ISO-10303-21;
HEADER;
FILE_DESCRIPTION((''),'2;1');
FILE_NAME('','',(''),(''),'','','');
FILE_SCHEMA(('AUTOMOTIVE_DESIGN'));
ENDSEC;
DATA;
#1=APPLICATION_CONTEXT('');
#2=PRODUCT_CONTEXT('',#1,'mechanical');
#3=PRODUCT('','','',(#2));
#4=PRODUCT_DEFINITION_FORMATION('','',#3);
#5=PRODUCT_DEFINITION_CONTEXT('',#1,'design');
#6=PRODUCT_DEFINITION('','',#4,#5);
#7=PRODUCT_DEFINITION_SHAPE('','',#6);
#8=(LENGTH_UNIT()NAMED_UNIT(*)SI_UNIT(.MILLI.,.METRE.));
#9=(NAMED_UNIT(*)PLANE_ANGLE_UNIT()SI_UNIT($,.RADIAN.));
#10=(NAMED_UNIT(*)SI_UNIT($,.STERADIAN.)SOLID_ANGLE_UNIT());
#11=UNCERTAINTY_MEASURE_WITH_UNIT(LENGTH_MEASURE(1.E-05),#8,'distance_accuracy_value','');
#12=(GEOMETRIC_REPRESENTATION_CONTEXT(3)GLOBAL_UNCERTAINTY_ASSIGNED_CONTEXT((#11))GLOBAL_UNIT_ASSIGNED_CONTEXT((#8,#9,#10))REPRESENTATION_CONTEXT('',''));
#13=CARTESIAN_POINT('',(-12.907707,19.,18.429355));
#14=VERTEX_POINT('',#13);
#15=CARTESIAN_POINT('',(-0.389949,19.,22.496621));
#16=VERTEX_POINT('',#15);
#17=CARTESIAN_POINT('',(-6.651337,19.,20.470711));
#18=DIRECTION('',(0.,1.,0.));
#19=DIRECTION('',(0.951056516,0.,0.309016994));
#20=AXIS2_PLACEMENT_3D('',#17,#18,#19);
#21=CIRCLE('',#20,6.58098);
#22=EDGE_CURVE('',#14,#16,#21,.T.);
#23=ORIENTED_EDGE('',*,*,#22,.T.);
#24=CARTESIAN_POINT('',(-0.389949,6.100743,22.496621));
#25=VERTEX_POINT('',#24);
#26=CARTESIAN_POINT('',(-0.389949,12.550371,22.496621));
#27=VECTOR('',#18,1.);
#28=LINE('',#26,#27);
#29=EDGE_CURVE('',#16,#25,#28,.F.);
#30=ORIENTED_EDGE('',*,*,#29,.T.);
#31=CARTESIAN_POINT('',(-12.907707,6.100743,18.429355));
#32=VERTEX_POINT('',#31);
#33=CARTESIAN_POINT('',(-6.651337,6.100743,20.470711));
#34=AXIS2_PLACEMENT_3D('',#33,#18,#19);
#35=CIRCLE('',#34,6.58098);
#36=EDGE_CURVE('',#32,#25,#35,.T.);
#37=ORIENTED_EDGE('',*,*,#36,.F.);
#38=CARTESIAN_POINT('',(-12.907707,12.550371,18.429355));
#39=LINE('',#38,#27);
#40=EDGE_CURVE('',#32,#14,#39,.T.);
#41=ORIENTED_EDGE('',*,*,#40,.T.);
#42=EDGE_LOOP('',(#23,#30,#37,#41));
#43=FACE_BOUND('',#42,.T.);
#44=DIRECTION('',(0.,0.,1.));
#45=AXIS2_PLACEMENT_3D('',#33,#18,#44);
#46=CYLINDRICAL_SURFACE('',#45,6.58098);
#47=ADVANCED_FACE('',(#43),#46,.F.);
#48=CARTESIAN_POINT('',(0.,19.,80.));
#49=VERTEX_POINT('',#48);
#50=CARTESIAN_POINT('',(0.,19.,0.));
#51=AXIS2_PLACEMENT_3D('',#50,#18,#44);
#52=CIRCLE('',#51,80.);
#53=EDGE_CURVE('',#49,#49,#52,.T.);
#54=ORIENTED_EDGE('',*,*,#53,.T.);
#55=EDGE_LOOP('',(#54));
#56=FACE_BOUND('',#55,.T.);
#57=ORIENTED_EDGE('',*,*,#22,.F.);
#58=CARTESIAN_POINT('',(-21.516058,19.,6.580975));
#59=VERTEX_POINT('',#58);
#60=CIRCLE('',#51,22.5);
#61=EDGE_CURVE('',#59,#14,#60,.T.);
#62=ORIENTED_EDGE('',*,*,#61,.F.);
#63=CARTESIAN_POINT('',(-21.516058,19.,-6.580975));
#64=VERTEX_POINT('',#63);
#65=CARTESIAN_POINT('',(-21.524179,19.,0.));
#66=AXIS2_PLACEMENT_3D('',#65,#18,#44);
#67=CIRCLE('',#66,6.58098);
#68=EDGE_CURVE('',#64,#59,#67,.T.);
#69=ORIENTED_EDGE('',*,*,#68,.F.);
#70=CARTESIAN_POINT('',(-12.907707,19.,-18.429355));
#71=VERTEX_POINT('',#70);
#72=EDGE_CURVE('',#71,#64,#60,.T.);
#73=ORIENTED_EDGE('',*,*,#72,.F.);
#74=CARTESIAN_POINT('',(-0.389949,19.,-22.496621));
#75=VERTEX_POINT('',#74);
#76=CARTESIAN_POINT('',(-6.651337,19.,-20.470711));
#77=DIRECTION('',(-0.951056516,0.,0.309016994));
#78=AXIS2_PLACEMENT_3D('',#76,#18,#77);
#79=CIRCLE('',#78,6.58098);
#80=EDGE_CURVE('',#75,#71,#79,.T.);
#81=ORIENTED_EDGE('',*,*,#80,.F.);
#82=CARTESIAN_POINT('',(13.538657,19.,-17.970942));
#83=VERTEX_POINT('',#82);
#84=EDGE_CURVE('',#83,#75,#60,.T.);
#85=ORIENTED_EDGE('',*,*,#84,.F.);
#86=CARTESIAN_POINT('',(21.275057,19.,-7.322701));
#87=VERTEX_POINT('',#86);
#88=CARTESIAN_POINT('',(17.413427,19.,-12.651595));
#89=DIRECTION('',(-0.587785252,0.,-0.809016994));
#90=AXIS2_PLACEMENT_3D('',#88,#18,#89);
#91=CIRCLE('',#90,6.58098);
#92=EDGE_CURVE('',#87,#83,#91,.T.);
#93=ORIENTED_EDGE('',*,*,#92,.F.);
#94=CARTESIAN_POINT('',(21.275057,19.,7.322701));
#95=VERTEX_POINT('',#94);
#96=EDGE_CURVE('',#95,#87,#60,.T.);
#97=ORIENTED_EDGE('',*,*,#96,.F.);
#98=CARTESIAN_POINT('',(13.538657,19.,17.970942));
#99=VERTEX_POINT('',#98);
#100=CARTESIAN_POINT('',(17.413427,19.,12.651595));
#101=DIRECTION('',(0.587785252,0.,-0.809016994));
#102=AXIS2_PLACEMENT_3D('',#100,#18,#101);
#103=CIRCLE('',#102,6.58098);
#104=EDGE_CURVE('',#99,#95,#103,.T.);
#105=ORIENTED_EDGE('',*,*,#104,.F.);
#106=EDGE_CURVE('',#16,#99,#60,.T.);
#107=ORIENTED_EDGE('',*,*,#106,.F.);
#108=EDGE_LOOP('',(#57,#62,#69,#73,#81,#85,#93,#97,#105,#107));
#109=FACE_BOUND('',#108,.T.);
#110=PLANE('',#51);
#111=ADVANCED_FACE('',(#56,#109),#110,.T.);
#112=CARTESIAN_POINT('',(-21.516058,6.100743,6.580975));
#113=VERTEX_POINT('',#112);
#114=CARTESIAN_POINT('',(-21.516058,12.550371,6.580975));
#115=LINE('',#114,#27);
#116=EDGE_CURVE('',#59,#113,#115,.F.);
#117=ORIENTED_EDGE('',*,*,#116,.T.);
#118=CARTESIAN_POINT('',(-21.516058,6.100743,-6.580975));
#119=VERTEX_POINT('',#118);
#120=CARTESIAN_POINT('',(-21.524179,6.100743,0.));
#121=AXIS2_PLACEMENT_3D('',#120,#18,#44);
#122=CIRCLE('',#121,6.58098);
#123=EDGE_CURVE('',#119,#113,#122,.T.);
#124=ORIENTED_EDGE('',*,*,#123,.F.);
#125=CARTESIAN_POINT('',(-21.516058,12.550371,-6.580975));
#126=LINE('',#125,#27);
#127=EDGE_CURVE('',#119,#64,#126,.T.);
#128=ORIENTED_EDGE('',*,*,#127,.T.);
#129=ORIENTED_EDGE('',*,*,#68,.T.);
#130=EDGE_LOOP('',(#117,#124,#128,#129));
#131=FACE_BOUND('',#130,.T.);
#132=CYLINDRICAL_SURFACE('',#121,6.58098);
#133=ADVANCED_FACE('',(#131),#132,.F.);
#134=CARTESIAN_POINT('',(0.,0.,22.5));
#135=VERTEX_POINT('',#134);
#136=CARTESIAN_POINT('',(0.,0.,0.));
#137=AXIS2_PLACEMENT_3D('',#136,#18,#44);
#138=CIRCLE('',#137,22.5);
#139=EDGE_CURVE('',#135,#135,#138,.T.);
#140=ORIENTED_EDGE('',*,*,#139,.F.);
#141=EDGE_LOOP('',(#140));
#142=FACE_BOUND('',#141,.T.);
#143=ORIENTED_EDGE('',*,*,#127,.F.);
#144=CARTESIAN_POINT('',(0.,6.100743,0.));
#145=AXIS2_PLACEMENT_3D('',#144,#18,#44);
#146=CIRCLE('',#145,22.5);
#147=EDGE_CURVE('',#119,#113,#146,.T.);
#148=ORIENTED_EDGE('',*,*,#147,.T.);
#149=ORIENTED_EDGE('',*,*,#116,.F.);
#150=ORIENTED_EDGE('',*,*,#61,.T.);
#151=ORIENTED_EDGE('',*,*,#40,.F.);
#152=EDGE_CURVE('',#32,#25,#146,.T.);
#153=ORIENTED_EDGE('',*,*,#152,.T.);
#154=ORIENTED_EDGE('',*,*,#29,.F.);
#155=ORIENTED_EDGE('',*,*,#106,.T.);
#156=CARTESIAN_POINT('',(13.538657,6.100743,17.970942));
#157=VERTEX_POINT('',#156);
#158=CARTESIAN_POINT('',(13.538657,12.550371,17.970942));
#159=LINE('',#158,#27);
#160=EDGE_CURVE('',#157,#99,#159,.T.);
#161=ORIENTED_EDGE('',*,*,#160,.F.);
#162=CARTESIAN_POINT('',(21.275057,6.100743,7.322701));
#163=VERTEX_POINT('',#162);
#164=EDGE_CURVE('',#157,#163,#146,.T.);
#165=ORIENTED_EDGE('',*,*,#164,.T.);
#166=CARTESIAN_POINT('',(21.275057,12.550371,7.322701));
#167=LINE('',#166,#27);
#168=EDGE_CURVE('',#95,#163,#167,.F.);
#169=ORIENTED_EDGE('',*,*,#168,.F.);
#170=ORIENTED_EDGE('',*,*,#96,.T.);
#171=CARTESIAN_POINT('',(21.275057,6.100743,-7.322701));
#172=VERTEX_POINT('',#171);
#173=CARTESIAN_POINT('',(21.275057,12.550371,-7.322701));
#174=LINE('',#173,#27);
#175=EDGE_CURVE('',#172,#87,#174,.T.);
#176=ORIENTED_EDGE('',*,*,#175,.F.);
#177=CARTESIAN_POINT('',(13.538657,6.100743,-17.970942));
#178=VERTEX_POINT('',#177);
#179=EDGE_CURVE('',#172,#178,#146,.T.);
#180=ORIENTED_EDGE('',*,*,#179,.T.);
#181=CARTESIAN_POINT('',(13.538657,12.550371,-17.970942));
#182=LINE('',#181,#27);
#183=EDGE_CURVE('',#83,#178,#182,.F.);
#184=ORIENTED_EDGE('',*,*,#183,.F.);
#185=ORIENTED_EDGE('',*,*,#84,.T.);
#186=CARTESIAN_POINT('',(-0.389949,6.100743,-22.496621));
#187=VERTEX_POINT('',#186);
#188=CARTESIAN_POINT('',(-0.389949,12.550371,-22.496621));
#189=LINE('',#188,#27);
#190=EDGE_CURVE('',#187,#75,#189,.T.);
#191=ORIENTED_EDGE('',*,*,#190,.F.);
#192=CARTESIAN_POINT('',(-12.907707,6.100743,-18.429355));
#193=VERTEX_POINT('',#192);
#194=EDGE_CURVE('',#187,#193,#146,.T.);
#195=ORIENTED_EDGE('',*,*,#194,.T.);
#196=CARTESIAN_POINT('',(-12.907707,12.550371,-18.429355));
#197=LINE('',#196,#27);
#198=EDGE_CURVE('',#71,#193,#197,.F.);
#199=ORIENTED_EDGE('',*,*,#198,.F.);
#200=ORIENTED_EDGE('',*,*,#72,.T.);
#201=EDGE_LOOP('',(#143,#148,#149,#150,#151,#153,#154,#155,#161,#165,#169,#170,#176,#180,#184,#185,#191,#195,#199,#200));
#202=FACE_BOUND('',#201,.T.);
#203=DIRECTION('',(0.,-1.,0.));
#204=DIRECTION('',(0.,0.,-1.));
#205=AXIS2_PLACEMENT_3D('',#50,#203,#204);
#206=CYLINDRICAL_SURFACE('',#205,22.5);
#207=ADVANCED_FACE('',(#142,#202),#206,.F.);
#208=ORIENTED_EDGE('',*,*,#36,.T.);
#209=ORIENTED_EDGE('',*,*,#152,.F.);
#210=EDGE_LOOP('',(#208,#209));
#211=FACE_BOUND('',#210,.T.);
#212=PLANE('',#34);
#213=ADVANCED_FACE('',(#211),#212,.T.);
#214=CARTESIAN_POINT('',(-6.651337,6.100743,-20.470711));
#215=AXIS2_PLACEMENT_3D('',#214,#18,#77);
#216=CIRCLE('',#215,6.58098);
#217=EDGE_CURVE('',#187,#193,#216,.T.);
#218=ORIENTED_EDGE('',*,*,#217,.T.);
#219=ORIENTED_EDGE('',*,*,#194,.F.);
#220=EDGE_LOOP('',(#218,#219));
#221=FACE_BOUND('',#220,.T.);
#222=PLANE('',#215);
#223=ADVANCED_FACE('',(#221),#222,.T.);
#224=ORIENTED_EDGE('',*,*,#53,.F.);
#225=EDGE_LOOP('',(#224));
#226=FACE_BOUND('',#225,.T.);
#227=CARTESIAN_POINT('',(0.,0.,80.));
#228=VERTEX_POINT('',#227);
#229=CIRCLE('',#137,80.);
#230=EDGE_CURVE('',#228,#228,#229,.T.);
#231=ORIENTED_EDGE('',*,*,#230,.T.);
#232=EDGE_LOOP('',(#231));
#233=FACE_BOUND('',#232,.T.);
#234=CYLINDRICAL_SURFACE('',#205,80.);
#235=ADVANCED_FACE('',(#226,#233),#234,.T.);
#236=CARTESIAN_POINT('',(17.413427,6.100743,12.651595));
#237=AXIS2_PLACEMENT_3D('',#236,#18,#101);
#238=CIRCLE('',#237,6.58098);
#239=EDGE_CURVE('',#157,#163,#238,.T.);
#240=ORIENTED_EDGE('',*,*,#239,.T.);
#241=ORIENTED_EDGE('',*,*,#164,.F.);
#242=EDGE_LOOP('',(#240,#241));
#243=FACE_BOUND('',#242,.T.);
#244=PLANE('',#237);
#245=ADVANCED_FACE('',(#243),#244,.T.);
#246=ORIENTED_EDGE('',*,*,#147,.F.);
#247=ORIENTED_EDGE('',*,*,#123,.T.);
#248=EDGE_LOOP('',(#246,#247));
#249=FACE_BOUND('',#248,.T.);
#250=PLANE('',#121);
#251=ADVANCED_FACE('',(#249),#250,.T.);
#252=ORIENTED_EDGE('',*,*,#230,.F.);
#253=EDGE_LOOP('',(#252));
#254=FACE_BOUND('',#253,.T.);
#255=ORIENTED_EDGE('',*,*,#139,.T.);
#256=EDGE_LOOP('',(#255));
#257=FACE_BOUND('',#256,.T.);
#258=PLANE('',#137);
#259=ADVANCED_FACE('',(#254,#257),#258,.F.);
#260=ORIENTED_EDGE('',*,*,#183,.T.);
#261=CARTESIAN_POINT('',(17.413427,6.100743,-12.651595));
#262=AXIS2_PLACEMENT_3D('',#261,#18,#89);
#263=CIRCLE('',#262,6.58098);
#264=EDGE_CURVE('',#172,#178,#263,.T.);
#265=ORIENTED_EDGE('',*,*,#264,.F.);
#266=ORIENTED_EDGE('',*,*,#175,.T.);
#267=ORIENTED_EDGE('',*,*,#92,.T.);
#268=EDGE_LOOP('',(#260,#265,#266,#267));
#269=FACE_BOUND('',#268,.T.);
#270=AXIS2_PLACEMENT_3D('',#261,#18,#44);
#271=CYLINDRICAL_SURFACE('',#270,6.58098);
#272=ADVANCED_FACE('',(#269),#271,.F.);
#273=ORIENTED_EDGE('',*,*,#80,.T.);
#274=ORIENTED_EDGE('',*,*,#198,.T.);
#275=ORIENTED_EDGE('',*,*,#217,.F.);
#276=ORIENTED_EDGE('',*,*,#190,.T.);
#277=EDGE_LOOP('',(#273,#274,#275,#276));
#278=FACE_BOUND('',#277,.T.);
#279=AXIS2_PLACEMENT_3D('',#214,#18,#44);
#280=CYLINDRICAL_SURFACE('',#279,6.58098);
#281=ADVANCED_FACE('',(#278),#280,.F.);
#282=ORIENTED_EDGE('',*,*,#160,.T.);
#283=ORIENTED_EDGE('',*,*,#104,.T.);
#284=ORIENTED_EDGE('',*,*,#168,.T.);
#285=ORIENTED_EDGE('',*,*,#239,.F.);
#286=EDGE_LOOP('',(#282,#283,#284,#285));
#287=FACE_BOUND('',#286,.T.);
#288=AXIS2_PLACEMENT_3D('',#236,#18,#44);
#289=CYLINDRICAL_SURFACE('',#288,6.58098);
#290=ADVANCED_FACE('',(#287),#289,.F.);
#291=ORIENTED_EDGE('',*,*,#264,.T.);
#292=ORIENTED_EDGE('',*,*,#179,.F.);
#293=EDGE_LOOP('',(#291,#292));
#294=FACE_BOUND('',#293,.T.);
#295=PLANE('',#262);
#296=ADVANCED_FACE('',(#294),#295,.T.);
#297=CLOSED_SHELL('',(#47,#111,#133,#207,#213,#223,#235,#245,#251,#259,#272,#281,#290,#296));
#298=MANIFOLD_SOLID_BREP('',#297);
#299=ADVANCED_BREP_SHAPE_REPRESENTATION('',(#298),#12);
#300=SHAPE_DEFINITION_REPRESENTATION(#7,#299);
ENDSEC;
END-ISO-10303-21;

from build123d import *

# Parameters (mm, degrees)
SKETCH1_R           = 80
BOSS_EXTRUDE1_DEPTH = 19
SKETCH2_R           = 22.5
CUT_EXTRUDE1_DEPTH  = 115.721401665
SKETCH3_R           = 6.580979797
CUT_EXTRUDE2_DEPTH  = 12.899257244
CIRPATTERN1_COUNT   = 5


with BuildPart() as part:
    # Sketch1 → Boss-Extrude1 (new body)
    with BuildSketch(Plane(origin=(0, 0, 0), x_dir=(1, 0, 0), z_dir=(0, 1, 0))):
        Circle(SKETCH1_R)
    extrude(amount=BOSS_EXTRUDE1_DEPTH)

    # Sketch2 → Cut-Extrude1 (cut, through all)
    with BuildSketch(Plane(origin=(0, 0, 0), x_dir=(1, 0, 0), z_dir=(0, 1, 0))):
        Circle(SKETCH2_R)
    extrude(amount=CUT_EXTRUDE1_DEPTH, mode=Mode.SUBTRACT)

    # Sketch3 → Cut-Extrude2 (cut)
    with BuildSketch(Plane(origin=(0, 19, 0), x_dir=(1, 0, 0), z_dir=(0, 1, 0))):
        with Locations((-21.524179489, 0)):
            Circle(SKETCH3_R)
    cut_extrude2 = extrude(amount=-CUT_EXTRUDE2_DEPTH, mode=Mode.SUBTRACT)

    # CirPattern1: Cut-Extrude2 ×5 about axis
    cirpattern1_axis = Axis((0, 0, 0), (0, 1, 0))
    for i in range(1, CIRPATTERN1_COUNT):
        add(cut_extrude2.rotate(cirpattern1_axis, i * 360 / CIRPATTERN1_COUNT), mode=Mode.SUBTRACT)


solid = part.part
